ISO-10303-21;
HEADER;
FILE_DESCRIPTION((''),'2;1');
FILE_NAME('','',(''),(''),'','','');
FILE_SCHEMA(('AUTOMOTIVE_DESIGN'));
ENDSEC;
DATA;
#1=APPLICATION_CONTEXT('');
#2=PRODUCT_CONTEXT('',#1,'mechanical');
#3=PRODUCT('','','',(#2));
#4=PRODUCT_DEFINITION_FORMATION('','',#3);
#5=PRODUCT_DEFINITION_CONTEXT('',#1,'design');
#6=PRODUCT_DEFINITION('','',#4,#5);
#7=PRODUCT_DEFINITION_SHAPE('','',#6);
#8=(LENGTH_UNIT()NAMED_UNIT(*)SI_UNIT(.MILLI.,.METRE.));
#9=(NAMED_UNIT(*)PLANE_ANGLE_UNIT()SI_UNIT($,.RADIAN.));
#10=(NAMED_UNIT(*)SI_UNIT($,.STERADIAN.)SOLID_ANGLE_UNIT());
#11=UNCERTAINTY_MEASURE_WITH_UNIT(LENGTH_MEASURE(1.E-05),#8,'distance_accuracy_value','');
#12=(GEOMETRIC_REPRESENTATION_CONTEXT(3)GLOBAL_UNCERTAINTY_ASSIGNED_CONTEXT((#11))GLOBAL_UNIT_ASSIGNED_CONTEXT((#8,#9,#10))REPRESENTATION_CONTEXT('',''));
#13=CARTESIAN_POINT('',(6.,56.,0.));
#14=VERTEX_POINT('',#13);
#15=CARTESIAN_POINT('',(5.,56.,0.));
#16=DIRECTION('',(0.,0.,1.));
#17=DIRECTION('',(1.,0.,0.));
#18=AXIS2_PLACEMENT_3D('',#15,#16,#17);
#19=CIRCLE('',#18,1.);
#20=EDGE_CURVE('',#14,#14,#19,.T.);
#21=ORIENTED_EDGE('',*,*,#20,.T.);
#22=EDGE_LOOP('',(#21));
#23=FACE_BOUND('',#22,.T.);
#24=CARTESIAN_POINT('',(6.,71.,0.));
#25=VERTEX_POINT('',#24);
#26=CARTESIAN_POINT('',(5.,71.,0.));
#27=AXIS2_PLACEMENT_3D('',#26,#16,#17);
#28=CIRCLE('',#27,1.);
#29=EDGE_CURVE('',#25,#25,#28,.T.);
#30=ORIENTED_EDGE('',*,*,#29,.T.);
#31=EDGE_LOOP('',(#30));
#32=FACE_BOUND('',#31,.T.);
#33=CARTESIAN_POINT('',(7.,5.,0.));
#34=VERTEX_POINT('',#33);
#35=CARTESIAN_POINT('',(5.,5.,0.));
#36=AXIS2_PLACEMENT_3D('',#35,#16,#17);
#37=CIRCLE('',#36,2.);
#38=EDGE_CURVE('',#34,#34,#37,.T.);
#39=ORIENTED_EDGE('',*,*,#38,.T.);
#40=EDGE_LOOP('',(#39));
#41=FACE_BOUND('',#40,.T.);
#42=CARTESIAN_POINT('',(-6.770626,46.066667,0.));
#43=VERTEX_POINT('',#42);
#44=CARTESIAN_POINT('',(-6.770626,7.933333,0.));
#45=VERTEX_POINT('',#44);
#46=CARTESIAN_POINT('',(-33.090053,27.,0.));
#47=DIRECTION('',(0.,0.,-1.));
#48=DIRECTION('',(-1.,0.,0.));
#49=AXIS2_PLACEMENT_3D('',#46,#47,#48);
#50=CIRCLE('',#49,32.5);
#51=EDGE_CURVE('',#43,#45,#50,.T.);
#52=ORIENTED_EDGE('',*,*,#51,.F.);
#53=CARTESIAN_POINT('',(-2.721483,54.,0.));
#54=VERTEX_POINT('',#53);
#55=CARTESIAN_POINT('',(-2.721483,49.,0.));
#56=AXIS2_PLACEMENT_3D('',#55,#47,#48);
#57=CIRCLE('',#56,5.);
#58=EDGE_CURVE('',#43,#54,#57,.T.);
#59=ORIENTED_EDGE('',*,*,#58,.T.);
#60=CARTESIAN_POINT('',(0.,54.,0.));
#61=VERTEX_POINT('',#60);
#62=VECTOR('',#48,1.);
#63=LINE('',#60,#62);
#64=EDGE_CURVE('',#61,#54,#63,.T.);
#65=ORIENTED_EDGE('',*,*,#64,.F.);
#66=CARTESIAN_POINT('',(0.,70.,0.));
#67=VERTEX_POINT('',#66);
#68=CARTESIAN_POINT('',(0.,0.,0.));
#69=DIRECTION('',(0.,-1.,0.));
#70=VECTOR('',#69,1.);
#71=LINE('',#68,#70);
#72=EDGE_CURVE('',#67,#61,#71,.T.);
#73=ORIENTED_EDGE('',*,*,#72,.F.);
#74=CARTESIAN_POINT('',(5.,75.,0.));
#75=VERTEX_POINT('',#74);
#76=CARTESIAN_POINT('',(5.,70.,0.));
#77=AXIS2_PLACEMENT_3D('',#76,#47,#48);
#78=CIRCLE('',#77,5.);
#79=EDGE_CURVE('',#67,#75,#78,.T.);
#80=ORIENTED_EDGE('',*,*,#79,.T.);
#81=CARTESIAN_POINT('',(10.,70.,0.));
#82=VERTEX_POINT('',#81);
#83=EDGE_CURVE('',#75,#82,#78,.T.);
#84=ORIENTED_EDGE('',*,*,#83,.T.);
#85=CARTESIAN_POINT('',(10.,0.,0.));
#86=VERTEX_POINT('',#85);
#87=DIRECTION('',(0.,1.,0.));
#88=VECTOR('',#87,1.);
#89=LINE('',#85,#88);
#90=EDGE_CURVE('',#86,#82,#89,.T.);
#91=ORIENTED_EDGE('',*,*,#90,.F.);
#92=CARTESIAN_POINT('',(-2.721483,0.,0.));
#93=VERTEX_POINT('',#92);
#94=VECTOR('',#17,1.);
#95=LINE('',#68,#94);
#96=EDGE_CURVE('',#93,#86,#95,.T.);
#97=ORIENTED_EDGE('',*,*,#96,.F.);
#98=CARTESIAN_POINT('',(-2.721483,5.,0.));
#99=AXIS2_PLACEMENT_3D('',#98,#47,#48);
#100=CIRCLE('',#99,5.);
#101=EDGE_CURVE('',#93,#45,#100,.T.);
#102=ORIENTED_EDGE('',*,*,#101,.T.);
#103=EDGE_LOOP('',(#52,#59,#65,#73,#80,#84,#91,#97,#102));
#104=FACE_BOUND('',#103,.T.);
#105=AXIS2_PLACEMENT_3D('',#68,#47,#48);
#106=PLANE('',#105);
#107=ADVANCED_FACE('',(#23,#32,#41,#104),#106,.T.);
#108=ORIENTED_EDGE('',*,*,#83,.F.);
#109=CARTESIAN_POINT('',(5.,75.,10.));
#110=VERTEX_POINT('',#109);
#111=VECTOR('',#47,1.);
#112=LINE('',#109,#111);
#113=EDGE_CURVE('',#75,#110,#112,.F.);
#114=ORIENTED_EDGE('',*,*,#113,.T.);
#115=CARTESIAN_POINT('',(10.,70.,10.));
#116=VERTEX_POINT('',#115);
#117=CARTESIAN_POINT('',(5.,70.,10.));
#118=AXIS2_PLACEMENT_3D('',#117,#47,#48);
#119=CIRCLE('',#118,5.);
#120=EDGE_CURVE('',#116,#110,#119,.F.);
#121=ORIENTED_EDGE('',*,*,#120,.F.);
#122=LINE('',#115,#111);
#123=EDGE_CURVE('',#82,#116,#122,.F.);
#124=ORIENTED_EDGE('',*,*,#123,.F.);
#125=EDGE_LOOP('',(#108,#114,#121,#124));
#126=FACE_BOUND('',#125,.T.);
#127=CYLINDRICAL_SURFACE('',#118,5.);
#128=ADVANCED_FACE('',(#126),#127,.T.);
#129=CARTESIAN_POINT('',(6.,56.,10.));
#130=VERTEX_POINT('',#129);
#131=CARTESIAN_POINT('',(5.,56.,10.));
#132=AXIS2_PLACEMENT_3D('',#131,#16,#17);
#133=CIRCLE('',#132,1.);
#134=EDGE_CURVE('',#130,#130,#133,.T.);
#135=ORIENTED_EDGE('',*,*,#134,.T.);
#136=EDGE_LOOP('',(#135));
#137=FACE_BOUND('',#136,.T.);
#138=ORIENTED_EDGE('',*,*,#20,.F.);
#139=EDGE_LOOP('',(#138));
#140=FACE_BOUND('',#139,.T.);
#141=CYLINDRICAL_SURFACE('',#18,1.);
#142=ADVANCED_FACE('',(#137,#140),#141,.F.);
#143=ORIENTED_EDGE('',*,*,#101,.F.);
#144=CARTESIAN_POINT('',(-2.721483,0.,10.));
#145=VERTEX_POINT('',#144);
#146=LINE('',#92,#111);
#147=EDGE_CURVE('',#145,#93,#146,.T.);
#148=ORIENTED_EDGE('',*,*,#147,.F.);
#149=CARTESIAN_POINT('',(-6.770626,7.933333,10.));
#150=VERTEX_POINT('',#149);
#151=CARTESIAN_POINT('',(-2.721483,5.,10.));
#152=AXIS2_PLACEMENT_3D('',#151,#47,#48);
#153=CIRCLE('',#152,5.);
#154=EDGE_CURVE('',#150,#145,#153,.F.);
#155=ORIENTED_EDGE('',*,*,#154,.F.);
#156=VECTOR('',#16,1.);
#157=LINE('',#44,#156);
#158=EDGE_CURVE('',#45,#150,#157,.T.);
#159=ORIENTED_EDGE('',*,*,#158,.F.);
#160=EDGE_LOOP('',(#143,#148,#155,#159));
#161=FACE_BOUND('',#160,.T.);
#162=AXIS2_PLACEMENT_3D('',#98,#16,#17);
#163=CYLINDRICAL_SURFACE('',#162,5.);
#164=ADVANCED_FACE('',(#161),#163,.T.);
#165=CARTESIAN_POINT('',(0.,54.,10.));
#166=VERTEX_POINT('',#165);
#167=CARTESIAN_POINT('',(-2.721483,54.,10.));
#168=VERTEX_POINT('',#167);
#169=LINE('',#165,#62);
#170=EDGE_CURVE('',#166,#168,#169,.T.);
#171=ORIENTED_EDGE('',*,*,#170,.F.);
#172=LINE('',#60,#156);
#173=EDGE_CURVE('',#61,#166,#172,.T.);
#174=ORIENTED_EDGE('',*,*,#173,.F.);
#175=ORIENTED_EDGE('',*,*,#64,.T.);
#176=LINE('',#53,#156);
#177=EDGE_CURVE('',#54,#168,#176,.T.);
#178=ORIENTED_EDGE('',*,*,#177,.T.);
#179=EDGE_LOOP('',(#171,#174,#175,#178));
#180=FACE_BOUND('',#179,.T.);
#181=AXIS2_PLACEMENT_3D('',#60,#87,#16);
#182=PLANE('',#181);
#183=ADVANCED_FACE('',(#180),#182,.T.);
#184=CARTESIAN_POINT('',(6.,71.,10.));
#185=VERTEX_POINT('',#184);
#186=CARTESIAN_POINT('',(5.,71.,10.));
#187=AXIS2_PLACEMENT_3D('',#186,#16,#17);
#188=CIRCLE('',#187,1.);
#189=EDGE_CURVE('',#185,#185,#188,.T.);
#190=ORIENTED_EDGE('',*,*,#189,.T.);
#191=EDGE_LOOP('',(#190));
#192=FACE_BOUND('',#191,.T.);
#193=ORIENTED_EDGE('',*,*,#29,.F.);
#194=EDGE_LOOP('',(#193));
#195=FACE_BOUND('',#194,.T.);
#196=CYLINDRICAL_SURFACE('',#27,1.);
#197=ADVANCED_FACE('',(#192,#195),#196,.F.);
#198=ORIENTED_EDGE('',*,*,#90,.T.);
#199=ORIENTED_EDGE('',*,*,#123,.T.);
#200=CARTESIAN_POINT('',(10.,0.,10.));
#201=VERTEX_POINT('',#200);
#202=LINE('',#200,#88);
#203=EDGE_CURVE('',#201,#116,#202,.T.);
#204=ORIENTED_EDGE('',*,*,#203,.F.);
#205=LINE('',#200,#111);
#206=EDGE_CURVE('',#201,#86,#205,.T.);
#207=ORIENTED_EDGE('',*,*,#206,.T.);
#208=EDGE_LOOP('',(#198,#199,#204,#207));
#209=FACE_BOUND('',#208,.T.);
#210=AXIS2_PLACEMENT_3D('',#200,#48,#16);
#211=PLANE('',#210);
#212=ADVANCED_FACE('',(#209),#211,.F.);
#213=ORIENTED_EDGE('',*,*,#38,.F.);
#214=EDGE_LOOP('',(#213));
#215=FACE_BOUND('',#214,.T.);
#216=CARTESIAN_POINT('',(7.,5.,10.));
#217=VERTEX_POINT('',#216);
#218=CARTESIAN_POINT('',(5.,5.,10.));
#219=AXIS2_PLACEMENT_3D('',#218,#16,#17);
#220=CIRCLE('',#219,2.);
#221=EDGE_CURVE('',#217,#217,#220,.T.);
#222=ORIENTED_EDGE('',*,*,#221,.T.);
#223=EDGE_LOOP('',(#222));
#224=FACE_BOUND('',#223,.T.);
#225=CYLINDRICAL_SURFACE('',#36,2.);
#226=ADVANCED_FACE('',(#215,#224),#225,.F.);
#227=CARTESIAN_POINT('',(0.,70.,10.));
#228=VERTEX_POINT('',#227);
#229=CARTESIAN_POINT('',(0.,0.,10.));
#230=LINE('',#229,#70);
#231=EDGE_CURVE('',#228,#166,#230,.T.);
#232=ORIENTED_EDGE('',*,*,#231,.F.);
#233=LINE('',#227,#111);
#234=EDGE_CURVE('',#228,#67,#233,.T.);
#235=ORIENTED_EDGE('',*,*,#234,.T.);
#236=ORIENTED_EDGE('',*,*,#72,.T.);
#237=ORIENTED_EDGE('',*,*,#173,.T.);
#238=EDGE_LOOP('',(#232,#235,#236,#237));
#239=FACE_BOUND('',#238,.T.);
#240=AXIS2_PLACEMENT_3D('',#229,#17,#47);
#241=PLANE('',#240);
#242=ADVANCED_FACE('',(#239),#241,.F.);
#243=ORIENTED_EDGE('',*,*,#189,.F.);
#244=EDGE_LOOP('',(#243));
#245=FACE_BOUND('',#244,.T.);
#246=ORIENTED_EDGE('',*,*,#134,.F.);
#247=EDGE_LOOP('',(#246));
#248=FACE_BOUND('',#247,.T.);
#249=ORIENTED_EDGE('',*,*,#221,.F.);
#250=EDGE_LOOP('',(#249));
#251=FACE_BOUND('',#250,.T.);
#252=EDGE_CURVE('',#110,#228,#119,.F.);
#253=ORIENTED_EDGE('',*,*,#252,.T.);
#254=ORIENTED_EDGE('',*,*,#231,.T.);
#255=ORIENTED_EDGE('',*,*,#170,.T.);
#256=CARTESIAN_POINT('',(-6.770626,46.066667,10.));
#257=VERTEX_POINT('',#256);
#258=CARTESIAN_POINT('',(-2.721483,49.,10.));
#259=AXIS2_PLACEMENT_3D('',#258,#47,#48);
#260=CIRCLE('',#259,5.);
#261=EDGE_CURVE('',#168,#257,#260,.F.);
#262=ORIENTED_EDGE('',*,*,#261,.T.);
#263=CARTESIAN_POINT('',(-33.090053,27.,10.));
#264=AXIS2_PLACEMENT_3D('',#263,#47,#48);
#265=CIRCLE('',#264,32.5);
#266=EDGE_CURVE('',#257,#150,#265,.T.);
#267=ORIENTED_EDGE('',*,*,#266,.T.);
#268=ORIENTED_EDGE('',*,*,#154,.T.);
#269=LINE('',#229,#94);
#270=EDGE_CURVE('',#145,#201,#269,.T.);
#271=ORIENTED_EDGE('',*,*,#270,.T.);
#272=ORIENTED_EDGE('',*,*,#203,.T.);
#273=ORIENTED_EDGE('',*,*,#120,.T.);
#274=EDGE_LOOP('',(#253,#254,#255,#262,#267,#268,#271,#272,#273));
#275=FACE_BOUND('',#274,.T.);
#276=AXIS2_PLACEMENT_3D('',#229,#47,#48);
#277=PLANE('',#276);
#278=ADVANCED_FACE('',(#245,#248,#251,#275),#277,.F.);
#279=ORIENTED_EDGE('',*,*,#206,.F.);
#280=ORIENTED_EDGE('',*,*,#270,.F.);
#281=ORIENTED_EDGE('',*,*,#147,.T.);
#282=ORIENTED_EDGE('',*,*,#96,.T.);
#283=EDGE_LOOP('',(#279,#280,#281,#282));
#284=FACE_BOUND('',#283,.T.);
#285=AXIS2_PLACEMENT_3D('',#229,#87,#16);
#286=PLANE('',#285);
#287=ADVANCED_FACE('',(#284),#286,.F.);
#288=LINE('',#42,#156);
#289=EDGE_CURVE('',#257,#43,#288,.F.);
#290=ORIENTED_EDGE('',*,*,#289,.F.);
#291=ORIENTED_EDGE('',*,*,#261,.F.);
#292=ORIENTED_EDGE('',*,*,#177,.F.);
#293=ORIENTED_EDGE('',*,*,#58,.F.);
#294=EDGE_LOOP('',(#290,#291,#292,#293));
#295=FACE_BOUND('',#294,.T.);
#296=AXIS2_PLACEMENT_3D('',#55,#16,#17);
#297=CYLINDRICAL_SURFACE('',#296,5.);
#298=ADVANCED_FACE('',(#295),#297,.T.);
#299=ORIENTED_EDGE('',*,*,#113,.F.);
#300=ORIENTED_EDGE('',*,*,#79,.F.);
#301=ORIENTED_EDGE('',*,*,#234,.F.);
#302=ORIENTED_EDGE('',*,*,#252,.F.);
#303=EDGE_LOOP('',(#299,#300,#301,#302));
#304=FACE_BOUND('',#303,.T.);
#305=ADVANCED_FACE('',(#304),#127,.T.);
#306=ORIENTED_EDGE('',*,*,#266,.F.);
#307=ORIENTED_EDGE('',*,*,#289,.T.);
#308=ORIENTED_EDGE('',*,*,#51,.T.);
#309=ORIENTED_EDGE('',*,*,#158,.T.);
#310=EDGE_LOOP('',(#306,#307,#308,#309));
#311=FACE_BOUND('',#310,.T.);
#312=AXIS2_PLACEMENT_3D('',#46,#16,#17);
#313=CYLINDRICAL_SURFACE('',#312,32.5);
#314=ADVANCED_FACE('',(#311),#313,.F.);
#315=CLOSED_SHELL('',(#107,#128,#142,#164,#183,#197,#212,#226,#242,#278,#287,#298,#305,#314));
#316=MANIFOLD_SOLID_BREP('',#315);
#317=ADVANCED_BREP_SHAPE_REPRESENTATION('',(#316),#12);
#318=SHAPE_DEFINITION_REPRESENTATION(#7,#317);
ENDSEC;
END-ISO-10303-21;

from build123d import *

# Parameters (mm, degrees)
ESQUISSE1_W             = 10
ESQUISSE1_H             = 75
BOSS_EXTRU_1_DEPTH      = 10
ESQUISSE2_R             = 1
ESQUISSE2_R_2           = 2
ENL_V_MAT_EXTRU_1_DEPTH = 10
CONG_1_R                = 5
BOSS_EXTRU_2_DEPTH      = 10
CONG_2_R                = 5


with BuildPart() as part:
    # Esquisse1 → Boss.-Extru.1 (new body)
    with BuildSketch(Plane.XY):
        with Locations((5, 37.5)):
            Rectangle(ESQUISSE1_W, ESQUISSE1_H)
    extrude(amount=BOSS_EXTRU_1_DEPTH)

    # Esquisse2 → Enlèv. mat.-Extru.1 (cut)
    with BuildSketch(Plane.XY.offset(10)):
        with Locations((5, 56)):
            Circle(ESQUISSE2_R)
        with Locations((5, 71)):
            Circle(ESQUISSE2_R)
        with Locations((5, 5)):
            Circle(ESQUISSE2_R_2)
    extrude(amount=-ENL_V_MAT_EXTRU_1_DEPTH, mode=Mode.SUBTRACT)

    # Congé1
    cong_1_edges = [part.edges().sort_by_distance(p)[0] for p in [
        (10, 75, 5),
        (0, 75, 5),
    ]]
    fillet(cong_1_edges, radius=CONG_1_R - 0.0001)  # a hair under: the kernel refuses the full size

    # Esquisse3 → Boss.-Extru.2 (add)
    with BuildSketch(Plane.XY.offset(10)):
        with BuildLine():
            Line((0, 0), (-15, 0))
            ThreePointArc((-15, 0), (-0.590052515, 27), (-15, 54))
            Line((-15, 54), (0, 54))
            Line((0, 54), (0, 0))
        make_face()
    extrude(amount=-BOSS_EXTRU_2_DEPTH)

    # Congé2
    cong_2_edges = [part.edges().sort_by_distance(p)[0] for p in [
        (-15, 0, 5),
        (-15, 54, 5),
    ]]
    fillet(cong_2_edges, radius=CONG_2_R)


solid = part.part
